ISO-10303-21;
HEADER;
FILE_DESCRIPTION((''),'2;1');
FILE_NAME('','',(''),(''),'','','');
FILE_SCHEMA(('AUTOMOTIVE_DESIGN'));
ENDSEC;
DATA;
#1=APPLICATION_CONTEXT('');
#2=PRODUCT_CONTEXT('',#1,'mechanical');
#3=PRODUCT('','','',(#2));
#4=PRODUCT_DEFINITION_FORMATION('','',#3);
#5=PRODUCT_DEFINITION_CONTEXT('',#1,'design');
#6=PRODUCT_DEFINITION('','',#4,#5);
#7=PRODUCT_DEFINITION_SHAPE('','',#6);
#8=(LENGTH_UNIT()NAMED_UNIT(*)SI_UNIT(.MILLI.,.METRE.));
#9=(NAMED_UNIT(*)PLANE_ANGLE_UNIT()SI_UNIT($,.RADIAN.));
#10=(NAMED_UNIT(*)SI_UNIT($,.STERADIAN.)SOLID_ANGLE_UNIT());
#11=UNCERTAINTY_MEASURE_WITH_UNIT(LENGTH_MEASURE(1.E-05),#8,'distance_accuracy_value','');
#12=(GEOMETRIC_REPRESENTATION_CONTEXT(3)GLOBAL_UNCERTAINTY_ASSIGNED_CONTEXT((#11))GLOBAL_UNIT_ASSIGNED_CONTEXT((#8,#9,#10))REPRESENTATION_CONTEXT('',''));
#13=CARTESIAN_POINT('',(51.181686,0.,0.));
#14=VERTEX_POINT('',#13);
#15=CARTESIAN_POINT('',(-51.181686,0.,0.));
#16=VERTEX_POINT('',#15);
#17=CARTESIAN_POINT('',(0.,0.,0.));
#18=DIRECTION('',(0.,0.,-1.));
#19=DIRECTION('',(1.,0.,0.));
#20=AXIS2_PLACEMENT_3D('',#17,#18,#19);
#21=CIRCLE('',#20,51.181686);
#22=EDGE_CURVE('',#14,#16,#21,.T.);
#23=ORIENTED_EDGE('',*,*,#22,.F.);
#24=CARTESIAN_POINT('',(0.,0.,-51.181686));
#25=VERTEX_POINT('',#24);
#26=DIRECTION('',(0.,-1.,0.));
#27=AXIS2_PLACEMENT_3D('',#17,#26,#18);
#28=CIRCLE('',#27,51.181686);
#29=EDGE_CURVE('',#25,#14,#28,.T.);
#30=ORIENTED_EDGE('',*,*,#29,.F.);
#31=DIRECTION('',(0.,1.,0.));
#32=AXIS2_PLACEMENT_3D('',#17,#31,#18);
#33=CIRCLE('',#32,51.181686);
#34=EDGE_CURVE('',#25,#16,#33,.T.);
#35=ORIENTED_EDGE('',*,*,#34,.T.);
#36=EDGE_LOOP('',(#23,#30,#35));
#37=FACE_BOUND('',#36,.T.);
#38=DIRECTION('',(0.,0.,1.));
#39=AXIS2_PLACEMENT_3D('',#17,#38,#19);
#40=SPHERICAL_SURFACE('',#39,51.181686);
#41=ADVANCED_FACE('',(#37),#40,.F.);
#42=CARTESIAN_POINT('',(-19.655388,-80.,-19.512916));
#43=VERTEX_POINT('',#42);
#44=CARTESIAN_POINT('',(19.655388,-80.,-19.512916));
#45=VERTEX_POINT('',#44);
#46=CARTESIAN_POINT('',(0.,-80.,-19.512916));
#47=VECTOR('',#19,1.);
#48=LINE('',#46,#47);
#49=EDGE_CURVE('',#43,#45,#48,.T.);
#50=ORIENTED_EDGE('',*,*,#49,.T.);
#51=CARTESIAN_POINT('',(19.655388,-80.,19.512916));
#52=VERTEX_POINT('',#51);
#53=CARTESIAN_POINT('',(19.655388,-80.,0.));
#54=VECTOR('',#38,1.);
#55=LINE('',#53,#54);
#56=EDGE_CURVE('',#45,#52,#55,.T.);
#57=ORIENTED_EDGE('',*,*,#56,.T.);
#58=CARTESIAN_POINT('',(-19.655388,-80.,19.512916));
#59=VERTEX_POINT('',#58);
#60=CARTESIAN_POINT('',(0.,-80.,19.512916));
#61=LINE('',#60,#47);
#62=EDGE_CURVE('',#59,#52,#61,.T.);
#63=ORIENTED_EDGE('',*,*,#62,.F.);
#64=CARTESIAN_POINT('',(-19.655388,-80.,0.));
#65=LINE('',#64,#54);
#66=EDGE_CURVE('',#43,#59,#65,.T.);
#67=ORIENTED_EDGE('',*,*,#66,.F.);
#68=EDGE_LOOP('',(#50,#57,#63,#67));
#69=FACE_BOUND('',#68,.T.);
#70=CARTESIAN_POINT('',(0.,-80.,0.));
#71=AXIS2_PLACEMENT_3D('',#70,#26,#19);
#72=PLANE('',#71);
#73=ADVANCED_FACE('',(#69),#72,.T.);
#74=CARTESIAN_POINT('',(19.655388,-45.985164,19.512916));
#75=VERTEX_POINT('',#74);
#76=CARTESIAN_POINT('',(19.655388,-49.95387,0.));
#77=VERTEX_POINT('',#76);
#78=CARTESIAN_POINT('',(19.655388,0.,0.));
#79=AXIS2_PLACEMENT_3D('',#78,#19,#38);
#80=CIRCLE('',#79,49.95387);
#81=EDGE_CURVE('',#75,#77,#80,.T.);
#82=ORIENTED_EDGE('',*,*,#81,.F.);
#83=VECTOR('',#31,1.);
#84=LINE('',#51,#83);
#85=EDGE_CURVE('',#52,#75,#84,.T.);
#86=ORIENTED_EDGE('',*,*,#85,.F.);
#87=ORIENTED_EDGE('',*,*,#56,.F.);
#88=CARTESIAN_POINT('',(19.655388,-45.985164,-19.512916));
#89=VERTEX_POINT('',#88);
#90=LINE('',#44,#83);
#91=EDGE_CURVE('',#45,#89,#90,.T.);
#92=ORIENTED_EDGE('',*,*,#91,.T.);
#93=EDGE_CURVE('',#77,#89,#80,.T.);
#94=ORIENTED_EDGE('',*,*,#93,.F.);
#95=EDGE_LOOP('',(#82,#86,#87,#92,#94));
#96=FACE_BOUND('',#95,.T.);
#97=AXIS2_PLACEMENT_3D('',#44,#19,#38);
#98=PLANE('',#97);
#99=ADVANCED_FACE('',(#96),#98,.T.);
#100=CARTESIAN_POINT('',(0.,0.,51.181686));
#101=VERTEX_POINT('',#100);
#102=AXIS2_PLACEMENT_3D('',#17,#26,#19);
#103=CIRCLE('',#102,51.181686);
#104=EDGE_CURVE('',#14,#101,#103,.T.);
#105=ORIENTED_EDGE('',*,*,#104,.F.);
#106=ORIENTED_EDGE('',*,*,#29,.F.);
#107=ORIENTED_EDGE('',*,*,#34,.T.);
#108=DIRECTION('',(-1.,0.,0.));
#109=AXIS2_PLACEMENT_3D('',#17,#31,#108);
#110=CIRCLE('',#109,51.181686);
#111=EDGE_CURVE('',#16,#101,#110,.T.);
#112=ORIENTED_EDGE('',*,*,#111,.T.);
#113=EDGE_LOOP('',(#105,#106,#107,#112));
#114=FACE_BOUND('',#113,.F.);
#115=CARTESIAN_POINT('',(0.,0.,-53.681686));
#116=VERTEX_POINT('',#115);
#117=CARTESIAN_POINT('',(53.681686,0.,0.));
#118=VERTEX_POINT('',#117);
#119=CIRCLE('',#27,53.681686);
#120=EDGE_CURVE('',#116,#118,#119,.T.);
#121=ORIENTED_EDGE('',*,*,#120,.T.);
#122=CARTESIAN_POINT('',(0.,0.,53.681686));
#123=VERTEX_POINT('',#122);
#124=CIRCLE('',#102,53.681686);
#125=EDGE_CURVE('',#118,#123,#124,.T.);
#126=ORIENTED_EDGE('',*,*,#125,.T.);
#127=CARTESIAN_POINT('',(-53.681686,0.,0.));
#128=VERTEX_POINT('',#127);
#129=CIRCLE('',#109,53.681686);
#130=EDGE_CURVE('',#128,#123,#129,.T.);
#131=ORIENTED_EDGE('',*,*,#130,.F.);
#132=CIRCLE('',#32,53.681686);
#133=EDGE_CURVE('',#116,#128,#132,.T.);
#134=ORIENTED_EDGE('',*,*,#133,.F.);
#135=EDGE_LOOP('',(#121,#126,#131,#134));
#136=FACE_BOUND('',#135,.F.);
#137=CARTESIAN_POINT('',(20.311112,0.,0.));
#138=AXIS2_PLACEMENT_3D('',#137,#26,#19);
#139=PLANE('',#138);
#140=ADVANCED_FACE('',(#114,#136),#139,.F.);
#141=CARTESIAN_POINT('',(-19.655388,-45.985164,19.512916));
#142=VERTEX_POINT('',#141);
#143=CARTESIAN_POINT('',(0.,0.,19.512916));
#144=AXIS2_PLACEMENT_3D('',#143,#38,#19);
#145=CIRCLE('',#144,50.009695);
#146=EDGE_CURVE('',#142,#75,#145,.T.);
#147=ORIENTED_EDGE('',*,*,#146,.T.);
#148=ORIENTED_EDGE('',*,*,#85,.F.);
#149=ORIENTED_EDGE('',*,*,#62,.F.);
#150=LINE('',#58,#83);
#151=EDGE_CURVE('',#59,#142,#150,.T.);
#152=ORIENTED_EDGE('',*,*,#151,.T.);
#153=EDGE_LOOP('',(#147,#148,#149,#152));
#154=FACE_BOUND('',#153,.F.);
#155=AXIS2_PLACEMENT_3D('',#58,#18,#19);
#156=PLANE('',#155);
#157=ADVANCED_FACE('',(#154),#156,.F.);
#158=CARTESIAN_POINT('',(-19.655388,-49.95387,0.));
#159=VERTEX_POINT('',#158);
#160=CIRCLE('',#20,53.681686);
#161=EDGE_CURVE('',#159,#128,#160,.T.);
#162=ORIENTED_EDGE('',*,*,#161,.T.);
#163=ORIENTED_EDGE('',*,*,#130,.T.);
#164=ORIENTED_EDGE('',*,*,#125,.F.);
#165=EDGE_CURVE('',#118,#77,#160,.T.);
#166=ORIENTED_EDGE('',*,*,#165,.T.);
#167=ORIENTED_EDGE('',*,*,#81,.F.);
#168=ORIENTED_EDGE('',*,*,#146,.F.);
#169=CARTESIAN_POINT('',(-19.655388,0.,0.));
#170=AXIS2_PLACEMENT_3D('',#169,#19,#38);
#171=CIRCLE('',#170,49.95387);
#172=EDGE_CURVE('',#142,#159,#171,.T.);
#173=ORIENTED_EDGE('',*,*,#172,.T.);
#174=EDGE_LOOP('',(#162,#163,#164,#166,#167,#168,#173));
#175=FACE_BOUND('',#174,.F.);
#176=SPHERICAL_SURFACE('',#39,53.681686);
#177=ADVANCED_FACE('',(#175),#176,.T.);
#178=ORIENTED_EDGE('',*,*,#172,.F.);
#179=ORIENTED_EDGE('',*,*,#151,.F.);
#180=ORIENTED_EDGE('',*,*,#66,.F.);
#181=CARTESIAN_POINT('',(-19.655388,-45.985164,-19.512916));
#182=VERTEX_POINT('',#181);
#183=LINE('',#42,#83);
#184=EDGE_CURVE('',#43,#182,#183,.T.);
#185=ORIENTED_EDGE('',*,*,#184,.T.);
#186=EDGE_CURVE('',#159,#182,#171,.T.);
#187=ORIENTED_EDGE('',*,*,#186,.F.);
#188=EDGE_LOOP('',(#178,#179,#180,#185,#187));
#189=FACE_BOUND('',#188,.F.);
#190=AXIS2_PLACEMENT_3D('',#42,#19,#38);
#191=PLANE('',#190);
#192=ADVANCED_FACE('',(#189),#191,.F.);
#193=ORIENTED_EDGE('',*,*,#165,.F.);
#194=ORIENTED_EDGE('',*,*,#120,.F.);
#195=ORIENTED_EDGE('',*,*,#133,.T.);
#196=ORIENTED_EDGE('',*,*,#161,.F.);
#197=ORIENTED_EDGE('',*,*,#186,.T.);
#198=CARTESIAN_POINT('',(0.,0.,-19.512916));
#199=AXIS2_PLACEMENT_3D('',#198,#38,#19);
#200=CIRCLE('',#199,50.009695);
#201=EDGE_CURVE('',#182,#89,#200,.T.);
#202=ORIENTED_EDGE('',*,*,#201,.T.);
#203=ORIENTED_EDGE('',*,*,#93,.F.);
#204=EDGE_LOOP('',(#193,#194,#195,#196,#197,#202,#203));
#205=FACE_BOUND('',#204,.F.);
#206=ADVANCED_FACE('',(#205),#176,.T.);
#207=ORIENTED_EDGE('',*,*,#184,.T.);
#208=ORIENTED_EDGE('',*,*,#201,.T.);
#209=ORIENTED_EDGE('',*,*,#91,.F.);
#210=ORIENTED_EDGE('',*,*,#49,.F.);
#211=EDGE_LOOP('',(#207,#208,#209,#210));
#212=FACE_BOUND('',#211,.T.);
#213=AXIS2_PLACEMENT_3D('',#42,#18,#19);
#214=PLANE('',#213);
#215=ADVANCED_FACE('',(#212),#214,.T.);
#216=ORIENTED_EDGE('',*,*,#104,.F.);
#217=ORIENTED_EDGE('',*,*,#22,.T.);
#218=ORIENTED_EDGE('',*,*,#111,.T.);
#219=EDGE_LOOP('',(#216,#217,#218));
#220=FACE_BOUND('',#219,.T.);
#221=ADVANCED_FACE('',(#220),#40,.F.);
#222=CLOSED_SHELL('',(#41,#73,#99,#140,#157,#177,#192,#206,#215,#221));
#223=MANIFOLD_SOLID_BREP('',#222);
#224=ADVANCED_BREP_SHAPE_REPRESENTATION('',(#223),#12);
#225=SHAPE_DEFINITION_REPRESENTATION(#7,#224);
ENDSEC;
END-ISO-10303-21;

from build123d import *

# Parameters (mm, degrees)
F1_ANGLE = 180
F2_T     = -2.5
F4_W     = 39.3107756972
F4_H     = 39.0258319676


with BuildPart() as f1:
    # F0 (on Front) → F1 (revolve)
    with BuildSketch(Plane.XZ):
        with BuildLine():
            ThreePointArc((0, -53.6816862102), (37.9586843448, -37.9586843448), (53.6816862102, 0))
            ThreePointArc((53.6816862102, 0), (37.9586843448, 37.9586843448), (0, 53.6816862102))
            Line((0, 53.6816862102), (0, -53.6816862102))
        make_face()
    revolve(axis=Axis((0, 0, 0), (0, 0, -1)), revolution_arc=F1_ANGLE)

    # F2
    f2_openings = [f1.faces().sort_by_distance(p)[0] for p in [
        (0, 0, 0),
    ]]
    offset(amount=F2_T, openings=f2_openings)

    # F4 (on offset) → F5 (join, up to the next surface of F1)
    with BuildSketch(Plane.XZ.offset(80)):
        Rectangle(F4_W, F4_H)
    extrude(until=Until.NEXT, dir=(0, 1, 0))


solid = f1.part
